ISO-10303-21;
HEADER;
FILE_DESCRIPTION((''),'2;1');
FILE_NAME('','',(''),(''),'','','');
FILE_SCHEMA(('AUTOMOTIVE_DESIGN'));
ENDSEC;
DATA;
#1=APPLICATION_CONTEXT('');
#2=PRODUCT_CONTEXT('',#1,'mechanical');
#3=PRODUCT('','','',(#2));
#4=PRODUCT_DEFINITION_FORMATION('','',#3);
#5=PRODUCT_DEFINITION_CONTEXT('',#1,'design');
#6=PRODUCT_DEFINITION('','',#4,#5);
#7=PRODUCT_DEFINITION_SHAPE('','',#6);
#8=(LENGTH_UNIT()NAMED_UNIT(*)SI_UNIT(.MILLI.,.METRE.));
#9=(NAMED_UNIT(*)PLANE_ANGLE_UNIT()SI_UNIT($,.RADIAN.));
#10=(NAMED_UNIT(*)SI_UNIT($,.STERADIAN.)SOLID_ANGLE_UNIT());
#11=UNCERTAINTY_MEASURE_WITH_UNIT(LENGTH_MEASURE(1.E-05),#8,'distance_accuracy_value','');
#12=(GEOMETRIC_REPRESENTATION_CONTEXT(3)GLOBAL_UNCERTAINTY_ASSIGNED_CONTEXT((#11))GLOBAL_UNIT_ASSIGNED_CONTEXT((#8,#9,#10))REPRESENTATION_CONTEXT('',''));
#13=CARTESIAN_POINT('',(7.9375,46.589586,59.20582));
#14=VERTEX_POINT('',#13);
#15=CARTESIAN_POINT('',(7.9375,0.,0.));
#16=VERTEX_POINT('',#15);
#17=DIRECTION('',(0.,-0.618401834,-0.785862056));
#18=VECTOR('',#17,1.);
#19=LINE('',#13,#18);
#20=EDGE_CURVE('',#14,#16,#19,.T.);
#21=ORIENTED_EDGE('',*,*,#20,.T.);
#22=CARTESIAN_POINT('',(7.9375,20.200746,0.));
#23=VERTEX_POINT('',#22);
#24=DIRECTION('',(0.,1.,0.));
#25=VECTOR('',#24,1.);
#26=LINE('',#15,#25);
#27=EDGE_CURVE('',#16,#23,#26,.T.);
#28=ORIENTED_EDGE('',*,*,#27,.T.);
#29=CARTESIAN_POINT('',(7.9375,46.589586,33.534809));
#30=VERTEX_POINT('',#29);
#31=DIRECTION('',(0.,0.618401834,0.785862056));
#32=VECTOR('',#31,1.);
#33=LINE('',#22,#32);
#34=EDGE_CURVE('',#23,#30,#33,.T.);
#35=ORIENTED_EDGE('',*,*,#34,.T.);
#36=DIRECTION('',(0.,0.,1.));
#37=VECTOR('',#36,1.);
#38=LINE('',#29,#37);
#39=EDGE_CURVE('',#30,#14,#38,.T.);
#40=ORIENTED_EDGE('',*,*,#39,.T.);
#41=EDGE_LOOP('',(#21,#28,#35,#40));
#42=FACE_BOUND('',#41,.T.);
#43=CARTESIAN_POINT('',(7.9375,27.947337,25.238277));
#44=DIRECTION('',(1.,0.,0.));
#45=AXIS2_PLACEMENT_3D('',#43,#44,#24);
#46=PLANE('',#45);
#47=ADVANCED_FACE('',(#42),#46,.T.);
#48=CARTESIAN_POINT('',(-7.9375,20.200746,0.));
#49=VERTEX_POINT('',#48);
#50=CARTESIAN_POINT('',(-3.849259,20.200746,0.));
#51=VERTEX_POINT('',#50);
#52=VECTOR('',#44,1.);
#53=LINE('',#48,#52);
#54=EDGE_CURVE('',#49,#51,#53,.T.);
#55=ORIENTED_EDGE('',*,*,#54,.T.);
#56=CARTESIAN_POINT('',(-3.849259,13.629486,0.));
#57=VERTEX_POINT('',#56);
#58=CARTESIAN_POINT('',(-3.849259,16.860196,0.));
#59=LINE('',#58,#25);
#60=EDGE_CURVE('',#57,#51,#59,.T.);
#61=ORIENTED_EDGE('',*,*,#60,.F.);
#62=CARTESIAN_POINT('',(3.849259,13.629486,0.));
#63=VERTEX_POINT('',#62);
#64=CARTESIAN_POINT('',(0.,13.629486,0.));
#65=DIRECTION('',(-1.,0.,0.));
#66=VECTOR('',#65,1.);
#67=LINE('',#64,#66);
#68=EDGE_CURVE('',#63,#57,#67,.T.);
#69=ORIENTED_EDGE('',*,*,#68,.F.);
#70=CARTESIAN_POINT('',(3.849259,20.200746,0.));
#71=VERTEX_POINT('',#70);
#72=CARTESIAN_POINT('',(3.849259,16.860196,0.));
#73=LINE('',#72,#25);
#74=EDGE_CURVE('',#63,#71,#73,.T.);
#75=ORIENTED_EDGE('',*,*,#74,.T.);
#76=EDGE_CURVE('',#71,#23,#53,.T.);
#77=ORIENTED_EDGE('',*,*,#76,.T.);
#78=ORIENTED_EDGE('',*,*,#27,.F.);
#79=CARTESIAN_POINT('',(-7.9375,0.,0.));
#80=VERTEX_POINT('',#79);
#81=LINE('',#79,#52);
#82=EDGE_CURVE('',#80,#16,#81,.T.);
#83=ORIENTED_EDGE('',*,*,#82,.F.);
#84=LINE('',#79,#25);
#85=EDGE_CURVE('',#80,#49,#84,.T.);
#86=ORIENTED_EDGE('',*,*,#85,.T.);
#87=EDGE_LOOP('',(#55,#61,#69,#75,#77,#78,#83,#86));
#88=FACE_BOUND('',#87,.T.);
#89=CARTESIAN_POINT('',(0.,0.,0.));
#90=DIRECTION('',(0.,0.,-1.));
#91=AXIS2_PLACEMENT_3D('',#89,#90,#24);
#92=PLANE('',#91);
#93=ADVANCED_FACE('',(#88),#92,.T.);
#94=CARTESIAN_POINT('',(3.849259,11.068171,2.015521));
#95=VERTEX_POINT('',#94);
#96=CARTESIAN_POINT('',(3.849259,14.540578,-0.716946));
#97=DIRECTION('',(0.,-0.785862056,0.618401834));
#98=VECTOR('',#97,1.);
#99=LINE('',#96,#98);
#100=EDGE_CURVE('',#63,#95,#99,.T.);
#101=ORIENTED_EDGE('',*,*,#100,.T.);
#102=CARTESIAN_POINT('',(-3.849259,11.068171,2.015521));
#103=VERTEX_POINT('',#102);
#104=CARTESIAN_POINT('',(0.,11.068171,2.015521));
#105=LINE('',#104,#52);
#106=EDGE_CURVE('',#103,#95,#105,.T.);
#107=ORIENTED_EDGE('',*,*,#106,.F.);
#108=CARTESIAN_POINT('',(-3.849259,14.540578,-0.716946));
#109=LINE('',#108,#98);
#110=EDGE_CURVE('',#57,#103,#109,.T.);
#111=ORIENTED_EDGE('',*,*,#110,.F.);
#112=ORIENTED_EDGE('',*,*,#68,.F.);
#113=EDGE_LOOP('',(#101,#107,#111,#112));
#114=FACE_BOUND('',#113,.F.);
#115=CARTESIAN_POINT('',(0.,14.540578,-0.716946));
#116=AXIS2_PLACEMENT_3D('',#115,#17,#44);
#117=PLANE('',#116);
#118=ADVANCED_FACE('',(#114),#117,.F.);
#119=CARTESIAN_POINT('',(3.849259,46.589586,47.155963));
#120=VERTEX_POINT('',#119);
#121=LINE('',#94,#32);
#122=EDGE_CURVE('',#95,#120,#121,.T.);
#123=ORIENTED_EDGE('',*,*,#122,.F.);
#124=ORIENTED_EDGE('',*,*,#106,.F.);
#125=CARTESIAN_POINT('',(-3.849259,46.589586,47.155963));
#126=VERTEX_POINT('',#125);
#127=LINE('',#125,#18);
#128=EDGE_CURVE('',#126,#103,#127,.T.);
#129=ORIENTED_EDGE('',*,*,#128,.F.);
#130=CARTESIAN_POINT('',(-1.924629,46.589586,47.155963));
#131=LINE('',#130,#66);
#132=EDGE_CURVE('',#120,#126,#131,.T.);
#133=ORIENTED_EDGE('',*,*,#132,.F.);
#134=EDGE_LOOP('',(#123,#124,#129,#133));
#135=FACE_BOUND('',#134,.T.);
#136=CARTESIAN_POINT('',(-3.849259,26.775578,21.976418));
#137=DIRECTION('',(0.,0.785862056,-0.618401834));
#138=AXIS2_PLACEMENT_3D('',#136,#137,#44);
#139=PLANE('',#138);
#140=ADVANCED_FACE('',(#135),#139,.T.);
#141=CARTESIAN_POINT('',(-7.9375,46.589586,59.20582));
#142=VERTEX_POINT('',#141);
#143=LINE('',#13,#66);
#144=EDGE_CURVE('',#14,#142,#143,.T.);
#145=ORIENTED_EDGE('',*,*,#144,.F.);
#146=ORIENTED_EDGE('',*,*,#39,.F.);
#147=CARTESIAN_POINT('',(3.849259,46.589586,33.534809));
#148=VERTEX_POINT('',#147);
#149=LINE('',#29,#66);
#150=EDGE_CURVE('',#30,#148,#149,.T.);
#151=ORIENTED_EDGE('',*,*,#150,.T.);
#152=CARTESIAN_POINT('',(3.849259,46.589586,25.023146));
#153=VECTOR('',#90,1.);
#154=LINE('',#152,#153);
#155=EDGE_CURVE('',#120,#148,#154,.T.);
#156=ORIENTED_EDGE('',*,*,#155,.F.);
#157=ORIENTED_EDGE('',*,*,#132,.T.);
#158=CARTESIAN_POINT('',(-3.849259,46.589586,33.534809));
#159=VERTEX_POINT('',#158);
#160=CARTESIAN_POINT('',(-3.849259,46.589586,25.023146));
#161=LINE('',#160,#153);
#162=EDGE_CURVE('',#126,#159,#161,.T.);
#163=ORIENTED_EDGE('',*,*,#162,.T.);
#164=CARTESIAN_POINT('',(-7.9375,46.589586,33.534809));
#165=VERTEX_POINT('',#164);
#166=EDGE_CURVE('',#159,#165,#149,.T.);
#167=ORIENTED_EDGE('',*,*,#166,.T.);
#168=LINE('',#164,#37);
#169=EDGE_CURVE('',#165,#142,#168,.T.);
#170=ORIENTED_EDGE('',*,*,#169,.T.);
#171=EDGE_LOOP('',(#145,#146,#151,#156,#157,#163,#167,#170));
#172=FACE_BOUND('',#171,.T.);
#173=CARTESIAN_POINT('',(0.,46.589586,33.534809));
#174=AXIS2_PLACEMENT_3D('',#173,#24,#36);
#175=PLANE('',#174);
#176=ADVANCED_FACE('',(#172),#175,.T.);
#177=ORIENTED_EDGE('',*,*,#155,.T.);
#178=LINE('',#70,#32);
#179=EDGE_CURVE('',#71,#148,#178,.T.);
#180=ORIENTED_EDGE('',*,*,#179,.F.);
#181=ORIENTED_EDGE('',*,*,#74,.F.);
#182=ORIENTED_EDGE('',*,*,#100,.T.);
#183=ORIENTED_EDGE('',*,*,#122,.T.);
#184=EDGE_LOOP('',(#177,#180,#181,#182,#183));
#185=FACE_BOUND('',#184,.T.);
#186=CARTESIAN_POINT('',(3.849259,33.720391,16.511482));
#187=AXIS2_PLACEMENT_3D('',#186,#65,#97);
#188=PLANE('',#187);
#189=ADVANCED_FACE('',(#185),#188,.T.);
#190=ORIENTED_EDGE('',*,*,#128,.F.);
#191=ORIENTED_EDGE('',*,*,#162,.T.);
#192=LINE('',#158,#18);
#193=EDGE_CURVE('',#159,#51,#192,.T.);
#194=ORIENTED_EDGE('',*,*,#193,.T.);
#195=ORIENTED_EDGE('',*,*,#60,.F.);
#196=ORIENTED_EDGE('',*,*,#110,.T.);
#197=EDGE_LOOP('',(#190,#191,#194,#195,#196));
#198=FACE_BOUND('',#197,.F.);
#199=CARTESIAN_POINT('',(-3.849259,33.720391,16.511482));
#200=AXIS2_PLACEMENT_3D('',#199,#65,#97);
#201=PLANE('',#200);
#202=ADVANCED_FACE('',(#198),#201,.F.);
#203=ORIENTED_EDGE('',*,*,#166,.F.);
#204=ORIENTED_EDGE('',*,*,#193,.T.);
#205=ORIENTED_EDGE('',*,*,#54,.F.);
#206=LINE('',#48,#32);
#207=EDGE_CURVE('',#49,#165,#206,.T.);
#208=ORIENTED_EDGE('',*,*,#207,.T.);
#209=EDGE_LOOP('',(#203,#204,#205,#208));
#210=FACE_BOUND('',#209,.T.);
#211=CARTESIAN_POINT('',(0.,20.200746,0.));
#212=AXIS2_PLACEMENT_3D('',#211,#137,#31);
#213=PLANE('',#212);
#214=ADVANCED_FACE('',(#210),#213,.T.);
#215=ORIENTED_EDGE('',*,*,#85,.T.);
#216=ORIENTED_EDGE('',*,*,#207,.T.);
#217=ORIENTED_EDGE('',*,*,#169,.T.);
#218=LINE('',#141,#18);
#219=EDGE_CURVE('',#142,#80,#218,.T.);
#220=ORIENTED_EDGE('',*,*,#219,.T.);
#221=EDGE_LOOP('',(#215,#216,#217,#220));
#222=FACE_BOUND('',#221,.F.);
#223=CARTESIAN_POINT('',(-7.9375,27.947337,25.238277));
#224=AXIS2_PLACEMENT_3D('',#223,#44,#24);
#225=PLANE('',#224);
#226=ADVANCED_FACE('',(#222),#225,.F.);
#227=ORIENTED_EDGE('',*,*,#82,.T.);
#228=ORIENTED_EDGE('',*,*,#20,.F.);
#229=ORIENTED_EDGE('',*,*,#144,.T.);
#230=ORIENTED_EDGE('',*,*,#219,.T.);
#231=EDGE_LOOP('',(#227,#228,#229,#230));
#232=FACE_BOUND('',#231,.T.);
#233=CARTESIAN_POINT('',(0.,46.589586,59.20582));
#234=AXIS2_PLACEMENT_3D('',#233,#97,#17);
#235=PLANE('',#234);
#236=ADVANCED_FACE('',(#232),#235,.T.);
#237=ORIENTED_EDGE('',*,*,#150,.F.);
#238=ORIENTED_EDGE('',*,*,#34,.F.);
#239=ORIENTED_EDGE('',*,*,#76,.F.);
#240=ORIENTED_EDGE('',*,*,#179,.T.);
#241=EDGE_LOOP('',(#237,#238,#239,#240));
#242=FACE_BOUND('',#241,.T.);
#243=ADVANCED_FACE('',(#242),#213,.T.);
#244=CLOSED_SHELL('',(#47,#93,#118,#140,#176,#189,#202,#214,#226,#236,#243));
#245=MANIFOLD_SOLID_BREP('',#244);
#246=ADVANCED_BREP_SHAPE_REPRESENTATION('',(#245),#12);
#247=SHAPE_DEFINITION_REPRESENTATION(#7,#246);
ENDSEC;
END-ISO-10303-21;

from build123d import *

# Parameters (mm, degrees)
F1_DEPTH      = 7.9375
F4_W          = 7.6985172927
F4_H          = 8.837191388
F5_DEPTH      = 32.041668515
F5_DEPTH_BACK = 25.4


with BuildPart() as f1:
    # F6 (on Right) → F1 (new body, symmetric)
    with BuildSketch(Plane.YZ):
        Polygon((46.5895857938, 59.2058200122), (0, 0), (20.2007462682, 0), (46.5895857938, 33.5348094786), align=None)
    extrude(amount=F1_DEPTH, both=True)

    # F4 (on face) → F5 (cut, two sides)
    with BuildSketch(Plane(origin=(0, 20.9196058881, 26.5845338574), x_dir=(1, 0, 0), z_dir=(0, -0.6184018342, -0.7858620562))) as f5_sk:
        with Locations((0, -11.8702491745)):
            Rectangle(F4_W, F4_H)
    extrude(amount=-F5_DEPTH, mode=Mode.SUBTRACT)
    extrude(f5_sk.sketch, amount=F5_DEPTH_BACK, mode=Mode.SUBTRACT)


solid = f1.part
